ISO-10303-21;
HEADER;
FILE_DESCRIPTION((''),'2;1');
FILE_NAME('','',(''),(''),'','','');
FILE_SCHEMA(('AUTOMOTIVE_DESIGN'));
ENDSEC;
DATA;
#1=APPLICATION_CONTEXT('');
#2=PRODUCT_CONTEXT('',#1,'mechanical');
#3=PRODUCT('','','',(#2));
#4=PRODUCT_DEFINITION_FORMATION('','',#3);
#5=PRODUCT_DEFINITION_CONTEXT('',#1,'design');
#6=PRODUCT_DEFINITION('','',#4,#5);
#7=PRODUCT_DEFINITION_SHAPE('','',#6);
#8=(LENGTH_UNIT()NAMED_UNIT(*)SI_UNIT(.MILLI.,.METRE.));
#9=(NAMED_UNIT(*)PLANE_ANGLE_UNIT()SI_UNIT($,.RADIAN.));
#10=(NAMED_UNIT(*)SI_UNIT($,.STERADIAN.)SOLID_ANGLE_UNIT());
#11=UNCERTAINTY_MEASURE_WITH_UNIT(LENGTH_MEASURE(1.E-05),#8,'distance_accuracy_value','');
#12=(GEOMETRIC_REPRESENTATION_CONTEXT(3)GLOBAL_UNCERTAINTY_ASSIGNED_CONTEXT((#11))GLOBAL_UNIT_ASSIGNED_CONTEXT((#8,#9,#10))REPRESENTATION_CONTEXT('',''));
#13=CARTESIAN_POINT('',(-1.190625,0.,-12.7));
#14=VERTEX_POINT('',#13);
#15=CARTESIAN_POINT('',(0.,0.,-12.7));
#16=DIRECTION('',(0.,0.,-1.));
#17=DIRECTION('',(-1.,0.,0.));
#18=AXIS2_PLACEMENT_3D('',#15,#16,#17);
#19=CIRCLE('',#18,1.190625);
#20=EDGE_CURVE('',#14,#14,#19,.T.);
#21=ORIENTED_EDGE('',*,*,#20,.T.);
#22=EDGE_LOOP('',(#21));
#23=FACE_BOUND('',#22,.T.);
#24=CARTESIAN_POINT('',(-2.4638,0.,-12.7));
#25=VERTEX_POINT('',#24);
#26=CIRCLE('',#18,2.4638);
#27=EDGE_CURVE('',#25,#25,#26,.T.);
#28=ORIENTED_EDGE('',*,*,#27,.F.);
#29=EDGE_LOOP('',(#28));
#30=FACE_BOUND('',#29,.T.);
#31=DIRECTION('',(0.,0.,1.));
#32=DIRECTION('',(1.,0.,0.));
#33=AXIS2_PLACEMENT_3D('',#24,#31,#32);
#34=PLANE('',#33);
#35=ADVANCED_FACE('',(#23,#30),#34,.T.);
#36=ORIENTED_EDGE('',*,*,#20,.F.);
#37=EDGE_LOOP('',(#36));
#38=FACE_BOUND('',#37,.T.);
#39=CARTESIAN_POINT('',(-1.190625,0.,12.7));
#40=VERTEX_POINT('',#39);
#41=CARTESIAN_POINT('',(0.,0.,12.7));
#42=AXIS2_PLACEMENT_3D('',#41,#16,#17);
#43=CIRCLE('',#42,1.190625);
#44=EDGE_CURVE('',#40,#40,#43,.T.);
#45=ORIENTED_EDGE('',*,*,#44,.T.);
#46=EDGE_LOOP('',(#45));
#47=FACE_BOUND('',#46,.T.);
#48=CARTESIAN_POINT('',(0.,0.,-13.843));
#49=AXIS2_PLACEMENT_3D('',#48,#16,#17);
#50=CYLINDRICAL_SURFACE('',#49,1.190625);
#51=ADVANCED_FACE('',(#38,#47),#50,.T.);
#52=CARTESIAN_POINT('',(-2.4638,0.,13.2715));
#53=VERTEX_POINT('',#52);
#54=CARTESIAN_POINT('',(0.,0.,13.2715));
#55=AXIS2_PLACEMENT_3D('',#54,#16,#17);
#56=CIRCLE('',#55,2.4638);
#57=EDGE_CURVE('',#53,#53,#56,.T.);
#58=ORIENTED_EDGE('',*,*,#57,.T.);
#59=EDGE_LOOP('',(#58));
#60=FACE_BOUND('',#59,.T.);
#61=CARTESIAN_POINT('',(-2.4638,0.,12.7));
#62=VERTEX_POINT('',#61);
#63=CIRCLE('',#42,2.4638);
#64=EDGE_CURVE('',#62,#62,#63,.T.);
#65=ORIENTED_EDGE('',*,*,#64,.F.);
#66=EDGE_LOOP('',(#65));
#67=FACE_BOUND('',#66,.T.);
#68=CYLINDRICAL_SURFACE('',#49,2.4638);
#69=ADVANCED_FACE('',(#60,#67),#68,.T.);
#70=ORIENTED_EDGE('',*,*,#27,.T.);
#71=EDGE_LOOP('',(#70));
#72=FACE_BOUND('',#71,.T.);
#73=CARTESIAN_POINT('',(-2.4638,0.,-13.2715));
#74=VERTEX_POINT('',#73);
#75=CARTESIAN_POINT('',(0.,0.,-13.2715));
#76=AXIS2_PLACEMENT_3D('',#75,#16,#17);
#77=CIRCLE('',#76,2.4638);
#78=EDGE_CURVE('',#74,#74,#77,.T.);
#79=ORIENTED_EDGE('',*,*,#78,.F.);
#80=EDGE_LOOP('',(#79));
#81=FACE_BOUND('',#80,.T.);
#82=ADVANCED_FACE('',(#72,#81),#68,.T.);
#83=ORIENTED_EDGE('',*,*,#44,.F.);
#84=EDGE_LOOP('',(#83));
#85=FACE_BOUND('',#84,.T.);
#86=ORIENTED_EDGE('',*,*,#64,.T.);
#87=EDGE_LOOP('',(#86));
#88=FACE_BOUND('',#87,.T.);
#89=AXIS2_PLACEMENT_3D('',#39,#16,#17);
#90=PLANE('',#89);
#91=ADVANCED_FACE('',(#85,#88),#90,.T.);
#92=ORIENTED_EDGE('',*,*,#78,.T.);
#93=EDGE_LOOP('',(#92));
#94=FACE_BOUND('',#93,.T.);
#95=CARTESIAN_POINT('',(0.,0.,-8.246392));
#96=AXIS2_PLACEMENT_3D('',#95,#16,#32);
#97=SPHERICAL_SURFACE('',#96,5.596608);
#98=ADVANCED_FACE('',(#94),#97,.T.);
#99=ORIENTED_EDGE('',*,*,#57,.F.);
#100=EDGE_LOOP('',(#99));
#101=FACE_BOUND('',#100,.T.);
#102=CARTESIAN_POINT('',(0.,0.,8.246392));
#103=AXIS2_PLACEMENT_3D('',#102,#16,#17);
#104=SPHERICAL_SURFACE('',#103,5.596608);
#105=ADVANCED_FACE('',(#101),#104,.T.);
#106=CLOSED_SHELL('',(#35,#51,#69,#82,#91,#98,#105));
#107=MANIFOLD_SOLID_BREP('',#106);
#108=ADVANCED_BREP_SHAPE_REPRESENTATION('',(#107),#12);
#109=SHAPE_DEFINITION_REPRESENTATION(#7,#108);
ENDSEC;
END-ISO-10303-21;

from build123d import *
from OCP.BRepFilletAPI import BRepFilletAPI_MakeChamfer

# Parameters (mm, degrees)
SKETCH1_R           = 1.190625
EXTRUDE1_DEPTH      = 12.7
SKETCH1_W           = 9.8552
SKETCH1_H           = 1.27
EXTRUDE1_2_DEPTH    = 12.7
SKETCH20_R          = 1.4224
EXTRUDE24_DEPTH     = 20.045522232
CHAMFER2_SIZE       = 0.635
CHAMFER2_SIZE2      = 0.551997079
EXTRUDE4_DEPTH      = 19.94700397
EXTRUDE4_DEPTH_BACK = 19.94700397
SKETCH8_W           = 5.6896
SKETCH8_H           = 8.466666666
SKETCH9_R           = 1.190625
EXTRUDE5_DEPTH      = 8.466666667


# Read off the part's stored shape, not the designer's step: Mirror2
with BuildPart() as part:
    # Sketch1 → Extrude1 (new, symmetric)
    with BuildSketch(Plane.XY):
        with BuildLine():
            Line((12.7, -2.157017049), (1.190625, -2.157017049))
            ThreePointArc((1.190625, -2.157017049), (-1.856577095, 1.619701185), (2.298588957, -0.887017049))
            Line((2.298588957, -0.887017049), (12.7, -0.887017049))
            Line((12.7, -0.887017049), (12.7, -2.157017049))
        make_face()
        Circle(SKETCH1_R, mode=Mode.SUBTRACT)
    extrude(amount=EXTRUDE1_DEPTH, both=True)

    # Mirror2 outline → Mirror2 (revolve, cut)
    with BuildSketch(Plane(origin=(8.3312, 0, -7.8486), x_dir=(1, 0, 0), z_dir=(0, 0, 1))):
        Polygon((1.784715731, -0.887017049), (0, -0.887017049), (0, -1.93881362), (1.4224, -1.93881362), (1.4224, -1.30381362), align=None)
    revolve(axis=Axis((8.3312, 0, -7.8486), (0, 1, 0)), mode=Mode.SUBTRACT)

    # Mirror2 2 outline → Mirror2 2 (revolve, cut)
    with BuildSketch(Plane(origin=(8.3312, 0, 7.8486), x_dir=(1, 0, 0), z_dir=(0, 0, 1))):
        Polygon((0, -0.887017049), (0, -1.93881362), (1.4224, -1.93881362), (1.4224, -1.30381362), (1.784715731, -0.887017049), align=None)
    revolve(axis=Axis((8.3312, 0, 7.8486), (0, 1, 0)), mode=Mode.SUBTRACT)

    # Sketch8 → Extrude4 (cut, two sides: drawn at the far end of the back side and taken through both)
    with BuildSketch(Plane(origin=(0, 0, 0), x_dir=(1, 0, 0), z_dir=(0, 1, 0)).offset(-EXTRUDE4_DEPTH_BACK)):
        Rectangle(SKETCH8_W, SKETCH8_H)
    extrude(amount=EXTRUDE4_DEPTH + EXTRUDE4_DEPTH_BACK, mode=Mode.SUBTRACT)


with BuildPart() as body_2:
    # Sketch1 → Extrude1 2 (new, symmetric)
    with BuildSketch(Plane.XY):
        with Locations((-7.7724, -1.30381362)):
            Rectangle(SKETCH1_W, SKETCH1_H)
    extrude(amount=EXTRUDE1_2_DEPTH, both=True)

    # Sketch20 → Extrude24 (cut, through all)
    with BuildSketch(Plane(origin=(0, -0.66881362, 0), x_dir=(1, 0, 0), z_dir=(0, 1, 0))):
        with Locations(Location((-8.3312, 7.8486, 0), (0, 0, 270))):
            Circle(SKETCH20_R)
        with Locations(Location((-8.3312, -7.8486, 0), (0, 0, 270))):
            Circle(SKETCH20_R)
    extrude(amount=-EXTRUDE24_DEPTH, mode=Mode.SUBTRACT)

    # Chamfer2: one chamfer whose edges measure the first distance from different faces: ONE call of the kernel's chamfer builder (chamfer() names one face for all edges)
    chamfer2_edges_1 = [body_2.edges().sort_by_distance(p)[0] for p in [
        (-8.3312, -0.66881362, -9.271),
    ]]
    chamfer2_side_1 = [body_2.faces().sort_by_distance(p)[0] for p in [
        (-8.3312, -1.30381362, -9.271),
    ]]
    chamfer2_edges_2 = [body_2.edges().sort_by_distance(p)[0] for p in [
        (-8.3312, -0.66881362, 6.4262),
    ]]
    chamfer2_side_2 = [body_2.faces().sort_by_distance(p)[0] for p in [
        (-8.3312, -1.30381362, 6.4262),
    ]]
    chamfer2 = BRepFilletAPI_MakeChamfer(body_2.part.solid().wrapped)
    for e in chamfer2_edges_1:
        chamfer2.Add(CHAMFER2_SIZE, CHAMFER2_SIZE2, e.wrapped, chamfer2_side_1[0].wrapped)  # the first distance lies on this face
    for e in chamfer2_edges_2:
        chamfer2.Add(CHAMFER2_SIZE, CHAMFER2_SIZE2, e.wrapped, chamfer2_side_2[0].wrapped)  # the first distance lies on this face
    add(Compound.cast(chamfer2.Shape()), mode=Mode.REPLACE)

    # Sketch9 → Extrude5 (add)
    with BuildSketch(Plane.XY.offset(-4.233333333)):
        with BuildLine():
            Line((-2.371286314, -0.66881362), (-2.8448, -0.66881362))
            Line((-2.8448, -0.66881362), (-2.8448, -1.93881362))
            Line((-2.8448, -1.93881362), (-1.520300032, -1.93881362))
            ThreePointArc((-1.520300032, -1.93881362), (2.046786768, 1.371486189), (-2.371286314, -0.66881362))
        make_face()
        with Locations(Location((0, 0, 0), (0, 0, 180))):
            Circle(SKETCH9_R, mode=Mode.SUBTRACT)
    extrude(amount=EXTRUDE5_DEPTH)


with BuildPart() as body_3:
    # Sketch6 → Revolve1 (revolve)
    with BuildSketch(Plane(origin=(0, 0, 0), x_dir=(1, 0, 0), z_dir=(0, 1, 0))):
        with BuildLine():
            Line((-2.4638, -12.7), (-2.4638, -13.2715))
            ThreePointArc((-2.4638, -13.2715), (-1.264606924, -13.698253184), (0, -13.843))
            Line((0, -13.843), (0, 13.843))
            ThreePointArc((0, 13.843), (-1.264606924, 13.698253184), (-2.4638, 13.2715))
            Line((-2.4638, 13.2715), (-2.4638, 12.7))
            Line((-2.4638, 12.7), (-1.190625, 12.7))
            Line((-1.190625, 12.7), (-1.190625, -12.7))
            Line((-1.190625, -12.7), (-2.4638, -12.7))
        make_face()
    revolve(axis=Axis((0, 0, -13.843), (0, 0, 1)))


solid = body_3.part
